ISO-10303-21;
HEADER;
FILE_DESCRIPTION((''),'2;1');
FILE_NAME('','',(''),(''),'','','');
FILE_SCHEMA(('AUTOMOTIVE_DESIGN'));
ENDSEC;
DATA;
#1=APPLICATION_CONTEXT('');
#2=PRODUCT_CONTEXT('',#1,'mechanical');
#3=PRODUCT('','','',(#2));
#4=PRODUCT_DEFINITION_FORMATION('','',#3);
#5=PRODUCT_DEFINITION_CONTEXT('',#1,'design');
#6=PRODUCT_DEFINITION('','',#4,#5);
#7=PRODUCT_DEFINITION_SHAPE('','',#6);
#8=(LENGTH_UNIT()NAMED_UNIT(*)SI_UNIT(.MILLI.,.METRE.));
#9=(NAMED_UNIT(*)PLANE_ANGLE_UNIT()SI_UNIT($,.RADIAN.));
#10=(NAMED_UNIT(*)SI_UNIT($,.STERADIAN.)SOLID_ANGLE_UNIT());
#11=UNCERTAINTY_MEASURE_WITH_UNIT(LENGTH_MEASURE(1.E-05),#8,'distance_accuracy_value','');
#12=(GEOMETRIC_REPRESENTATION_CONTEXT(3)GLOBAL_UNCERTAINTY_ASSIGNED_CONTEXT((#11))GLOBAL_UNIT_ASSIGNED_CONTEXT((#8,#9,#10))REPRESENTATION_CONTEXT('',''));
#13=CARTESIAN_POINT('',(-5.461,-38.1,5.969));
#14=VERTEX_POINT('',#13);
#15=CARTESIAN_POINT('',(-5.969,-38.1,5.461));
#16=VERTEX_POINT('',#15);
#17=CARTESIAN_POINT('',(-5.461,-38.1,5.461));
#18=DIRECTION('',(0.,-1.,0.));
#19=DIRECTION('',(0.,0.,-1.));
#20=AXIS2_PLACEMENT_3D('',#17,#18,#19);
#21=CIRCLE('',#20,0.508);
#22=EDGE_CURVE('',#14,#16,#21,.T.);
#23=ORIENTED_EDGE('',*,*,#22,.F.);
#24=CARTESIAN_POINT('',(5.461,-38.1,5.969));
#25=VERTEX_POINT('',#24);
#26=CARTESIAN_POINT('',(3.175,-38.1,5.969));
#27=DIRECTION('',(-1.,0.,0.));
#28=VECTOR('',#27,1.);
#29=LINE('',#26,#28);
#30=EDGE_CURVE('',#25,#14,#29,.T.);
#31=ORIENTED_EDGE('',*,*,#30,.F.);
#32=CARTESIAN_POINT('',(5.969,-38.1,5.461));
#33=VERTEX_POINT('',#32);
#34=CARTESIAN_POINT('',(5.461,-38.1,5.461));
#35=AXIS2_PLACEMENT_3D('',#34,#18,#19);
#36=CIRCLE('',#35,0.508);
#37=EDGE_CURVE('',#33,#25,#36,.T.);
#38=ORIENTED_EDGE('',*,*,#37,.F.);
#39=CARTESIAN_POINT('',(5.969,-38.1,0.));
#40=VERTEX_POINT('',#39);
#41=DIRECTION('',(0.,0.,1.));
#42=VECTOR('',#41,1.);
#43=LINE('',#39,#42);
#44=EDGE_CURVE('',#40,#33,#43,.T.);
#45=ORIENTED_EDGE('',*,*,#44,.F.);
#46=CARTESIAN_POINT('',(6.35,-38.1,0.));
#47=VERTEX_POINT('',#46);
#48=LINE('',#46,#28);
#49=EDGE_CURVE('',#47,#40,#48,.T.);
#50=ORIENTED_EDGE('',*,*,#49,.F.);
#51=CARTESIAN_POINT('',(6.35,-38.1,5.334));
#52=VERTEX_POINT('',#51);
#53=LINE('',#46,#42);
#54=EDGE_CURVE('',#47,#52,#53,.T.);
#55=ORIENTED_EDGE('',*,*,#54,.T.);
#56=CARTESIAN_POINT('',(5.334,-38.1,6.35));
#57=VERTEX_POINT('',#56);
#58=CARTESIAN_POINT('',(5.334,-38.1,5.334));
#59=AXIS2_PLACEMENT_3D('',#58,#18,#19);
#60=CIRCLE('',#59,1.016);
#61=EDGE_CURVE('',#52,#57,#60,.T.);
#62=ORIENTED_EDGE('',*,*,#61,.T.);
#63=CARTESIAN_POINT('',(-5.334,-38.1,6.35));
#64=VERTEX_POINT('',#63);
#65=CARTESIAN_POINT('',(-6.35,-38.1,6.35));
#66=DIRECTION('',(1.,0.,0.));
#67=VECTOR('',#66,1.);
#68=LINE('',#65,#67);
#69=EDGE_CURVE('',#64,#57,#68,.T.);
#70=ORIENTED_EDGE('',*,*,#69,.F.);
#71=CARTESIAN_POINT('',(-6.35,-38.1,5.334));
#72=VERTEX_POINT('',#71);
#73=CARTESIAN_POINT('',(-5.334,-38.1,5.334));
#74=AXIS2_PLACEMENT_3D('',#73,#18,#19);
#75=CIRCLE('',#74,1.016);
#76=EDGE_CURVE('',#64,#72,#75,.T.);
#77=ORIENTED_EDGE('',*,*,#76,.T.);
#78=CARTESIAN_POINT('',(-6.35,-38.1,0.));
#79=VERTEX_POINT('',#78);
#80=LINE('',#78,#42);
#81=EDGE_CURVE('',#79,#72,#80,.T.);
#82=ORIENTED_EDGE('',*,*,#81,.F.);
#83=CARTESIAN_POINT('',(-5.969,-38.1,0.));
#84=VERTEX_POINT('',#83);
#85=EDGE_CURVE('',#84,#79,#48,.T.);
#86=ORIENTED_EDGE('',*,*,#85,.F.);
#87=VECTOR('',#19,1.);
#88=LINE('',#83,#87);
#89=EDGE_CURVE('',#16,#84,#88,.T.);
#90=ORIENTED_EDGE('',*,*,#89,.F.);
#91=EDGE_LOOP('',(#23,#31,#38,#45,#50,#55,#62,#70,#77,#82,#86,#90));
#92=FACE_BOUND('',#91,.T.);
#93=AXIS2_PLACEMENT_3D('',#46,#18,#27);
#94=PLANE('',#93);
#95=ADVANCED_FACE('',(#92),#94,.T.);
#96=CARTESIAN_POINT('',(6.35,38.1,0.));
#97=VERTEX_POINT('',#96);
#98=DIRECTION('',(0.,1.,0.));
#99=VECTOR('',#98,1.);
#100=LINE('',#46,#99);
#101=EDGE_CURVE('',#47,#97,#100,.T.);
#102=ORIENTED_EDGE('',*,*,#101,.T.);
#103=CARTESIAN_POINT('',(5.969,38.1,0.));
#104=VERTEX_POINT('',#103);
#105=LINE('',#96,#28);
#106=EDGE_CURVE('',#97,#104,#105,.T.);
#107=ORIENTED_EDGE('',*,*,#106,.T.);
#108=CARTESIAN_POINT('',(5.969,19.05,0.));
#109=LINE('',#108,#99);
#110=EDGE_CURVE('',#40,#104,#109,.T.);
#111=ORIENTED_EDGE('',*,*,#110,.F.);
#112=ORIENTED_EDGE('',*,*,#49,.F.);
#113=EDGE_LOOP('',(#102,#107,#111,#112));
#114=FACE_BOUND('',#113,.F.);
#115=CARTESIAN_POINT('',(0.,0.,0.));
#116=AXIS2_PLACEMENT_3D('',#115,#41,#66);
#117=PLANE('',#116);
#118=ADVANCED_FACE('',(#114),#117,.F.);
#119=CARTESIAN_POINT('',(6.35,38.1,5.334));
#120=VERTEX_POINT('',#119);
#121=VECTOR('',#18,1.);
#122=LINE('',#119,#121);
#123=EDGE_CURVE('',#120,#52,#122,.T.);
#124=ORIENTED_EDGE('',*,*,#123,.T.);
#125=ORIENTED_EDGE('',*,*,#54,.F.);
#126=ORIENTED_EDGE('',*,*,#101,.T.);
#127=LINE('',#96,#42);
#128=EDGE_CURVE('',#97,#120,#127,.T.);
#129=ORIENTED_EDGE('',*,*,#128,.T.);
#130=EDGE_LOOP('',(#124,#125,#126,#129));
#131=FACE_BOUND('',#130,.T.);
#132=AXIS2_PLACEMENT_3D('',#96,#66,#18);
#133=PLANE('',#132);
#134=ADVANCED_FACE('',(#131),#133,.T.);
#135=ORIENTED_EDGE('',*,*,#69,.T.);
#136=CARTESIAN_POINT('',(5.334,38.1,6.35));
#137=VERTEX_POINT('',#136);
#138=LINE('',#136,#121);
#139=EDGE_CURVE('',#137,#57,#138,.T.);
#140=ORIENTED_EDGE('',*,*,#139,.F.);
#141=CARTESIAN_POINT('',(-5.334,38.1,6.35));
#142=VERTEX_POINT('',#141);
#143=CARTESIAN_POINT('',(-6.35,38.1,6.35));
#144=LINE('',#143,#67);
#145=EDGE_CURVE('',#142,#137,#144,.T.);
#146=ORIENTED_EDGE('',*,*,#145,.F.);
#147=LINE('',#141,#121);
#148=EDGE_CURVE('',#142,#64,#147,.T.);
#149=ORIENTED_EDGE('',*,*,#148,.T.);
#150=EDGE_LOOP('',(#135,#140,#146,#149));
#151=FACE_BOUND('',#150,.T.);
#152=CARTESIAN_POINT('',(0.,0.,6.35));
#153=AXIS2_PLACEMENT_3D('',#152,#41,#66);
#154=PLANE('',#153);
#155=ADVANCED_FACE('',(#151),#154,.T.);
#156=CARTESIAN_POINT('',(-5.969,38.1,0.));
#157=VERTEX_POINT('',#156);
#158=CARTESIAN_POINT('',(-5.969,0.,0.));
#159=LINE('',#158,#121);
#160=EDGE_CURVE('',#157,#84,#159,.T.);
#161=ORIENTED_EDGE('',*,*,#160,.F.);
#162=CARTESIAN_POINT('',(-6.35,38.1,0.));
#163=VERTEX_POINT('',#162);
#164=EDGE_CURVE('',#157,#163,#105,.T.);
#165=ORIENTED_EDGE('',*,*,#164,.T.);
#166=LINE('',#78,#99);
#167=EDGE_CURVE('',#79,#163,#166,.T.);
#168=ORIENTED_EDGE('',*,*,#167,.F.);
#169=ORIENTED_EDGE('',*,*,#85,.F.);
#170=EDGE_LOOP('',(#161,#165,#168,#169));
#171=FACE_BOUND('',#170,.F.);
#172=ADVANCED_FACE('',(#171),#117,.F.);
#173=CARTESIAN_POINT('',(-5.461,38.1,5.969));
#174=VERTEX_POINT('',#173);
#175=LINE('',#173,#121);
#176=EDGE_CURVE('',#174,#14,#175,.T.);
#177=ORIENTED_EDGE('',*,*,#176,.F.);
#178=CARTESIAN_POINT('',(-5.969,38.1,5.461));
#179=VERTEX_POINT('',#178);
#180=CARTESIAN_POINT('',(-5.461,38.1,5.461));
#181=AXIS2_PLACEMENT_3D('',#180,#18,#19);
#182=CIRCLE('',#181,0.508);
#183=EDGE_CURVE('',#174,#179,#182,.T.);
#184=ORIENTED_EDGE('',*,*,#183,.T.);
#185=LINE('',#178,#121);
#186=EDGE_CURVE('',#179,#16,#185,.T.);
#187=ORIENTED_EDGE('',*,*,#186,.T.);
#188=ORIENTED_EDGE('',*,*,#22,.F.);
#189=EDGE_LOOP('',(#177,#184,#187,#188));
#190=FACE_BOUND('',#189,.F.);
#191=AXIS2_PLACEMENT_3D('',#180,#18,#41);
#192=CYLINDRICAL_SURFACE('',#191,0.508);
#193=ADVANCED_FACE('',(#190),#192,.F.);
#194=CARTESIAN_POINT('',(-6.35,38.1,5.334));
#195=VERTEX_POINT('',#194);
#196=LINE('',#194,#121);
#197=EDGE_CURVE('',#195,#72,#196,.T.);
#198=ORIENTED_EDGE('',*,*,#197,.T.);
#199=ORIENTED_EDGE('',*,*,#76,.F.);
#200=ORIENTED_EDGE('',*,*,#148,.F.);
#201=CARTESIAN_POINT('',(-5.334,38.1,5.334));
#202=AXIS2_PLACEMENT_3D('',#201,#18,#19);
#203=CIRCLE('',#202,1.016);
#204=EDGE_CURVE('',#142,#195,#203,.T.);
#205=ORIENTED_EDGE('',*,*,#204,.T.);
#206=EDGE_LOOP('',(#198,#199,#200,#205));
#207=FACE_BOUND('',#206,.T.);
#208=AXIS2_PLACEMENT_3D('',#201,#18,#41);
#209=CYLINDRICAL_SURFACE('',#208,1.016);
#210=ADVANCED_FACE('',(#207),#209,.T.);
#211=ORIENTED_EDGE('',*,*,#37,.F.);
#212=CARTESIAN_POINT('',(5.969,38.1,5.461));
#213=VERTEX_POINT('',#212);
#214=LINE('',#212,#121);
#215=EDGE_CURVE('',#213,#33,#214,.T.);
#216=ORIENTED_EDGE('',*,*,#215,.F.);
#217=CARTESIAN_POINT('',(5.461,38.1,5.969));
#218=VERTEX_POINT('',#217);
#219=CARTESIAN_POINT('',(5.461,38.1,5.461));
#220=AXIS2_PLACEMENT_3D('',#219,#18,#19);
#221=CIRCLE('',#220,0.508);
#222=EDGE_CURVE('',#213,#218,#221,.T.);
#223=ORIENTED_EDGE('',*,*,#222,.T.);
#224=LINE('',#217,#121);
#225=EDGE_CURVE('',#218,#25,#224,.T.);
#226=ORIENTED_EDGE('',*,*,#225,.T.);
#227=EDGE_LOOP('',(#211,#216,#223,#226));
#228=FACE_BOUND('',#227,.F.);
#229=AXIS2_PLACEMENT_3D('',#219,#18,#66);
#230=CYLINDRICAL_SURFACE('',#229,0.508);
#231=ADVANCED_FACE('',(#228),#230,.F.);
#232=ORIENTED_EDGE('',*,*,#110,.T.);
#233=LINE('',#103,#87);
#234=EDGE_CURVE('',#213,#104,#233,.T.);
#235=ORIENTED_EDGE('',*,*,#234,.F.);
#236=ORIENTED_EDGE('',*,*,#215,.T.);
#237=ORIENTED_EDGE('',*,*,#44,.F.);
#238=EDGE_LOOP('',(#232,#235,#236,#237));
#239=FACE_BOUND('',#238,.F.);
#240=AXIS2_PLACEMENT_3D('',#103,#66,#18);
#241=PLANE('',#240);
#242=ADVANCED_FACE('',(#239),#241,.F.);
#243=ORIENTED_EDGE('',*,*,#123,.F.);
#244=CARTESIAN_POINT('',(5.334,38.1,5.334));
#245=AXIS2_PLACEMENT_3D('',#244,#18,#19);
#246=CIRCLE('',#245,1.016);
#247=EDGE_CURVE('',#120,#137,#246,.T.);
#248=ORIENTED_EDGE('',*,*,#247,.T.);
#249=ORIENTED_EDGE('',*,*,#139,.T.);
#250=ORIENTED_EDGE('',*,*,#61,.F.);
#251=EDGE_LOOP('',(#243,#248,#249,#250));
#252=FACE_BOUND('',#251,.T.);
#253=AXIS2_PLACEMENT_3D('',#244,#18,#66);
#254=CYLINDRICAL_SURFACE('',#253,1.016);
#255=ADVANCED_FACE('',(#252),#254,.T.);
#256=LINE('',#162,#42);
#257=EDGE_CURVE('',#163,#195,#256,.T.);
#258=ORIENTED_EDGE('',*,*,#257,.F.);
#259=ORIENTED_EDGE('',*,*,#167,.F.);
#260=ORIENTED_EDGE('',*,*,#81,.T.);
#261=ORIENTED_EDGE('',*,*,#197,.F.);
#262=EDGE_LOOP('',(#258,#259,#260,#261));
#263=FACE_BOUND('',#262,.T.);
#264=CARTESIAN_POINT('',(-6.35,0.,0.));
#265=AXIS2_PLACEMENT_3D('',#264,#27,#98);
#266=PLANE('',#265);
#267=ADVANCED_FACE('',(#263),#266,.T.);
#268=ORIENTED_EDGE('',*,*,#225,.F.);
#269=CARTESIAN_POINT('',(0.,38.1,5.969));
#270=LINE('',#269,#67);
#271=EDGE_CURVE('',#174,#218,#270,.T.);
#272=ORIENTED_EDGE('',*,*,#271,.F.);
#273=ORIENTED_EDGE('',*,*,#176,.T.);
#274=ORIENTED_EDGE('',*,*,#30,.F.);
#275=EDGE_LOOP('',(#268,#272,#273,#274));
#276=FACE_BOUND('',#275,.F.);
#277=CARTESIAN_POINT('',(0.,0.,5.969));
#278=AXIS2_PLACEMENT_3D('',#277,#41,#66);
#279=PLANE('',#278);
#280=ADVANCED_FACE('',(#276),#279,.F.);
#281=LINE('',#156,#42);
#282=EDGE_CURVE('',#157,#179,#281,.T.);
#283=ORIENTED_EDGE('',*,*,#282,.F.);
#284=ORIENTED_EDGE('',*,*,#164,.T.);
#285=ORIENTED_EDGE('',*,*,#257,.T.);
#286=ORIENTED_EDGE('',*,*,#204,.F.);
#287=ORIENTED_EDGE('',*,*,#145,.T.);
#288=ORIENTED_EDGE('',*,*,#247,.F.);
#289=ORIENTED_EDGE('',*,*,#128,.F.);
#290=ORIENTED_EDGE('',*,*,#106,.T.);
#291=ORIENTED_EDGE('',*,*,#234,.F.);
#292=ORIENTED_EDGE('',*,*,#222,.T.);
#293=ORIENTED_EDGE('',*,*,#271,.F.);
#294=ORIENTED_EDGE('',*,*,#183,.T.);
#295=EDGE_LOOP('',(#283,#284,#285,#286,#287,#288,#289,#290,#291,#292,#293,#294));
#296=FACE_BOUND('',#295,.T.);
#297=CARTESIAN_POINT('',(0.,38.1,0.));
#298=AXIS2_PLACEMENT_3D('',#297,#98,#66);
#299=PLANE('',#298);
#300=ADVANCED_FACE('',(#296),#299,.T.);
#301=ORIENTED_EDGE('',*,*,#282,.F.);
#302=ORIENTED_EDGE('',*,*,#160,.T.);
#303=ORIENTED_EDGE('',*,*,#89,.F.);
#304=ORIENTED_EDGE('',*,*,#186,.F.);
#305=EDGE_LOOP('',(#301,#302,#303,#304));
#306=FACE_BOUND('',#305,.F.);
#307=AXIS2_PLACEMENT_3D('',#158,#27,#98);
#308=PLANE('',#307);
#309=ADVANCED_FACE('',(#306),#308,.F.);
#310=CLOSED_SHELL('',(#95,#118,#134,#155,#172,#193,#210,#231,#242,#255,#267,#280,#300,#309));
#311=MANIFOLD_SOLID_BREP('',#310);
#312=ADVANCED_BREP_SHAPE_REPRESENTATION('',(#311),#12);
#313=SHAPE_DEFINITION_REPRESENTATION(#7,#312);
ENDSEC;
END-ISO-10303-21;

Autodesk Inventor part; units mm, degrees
ref_plane "YZ Plane" through (0, 0, 0) normal (1, 0, 0) x (0, 1, 0)
ref_plane "XZ Plane" through (0, 0, 0) normal (0, 1, 0) x (-1, 0, 0)
ref_plane "XY Plane" through (0, 0, 0) normal (0, 0, 1) x (1, 0, 0)
sketch "Sketch1" plane through (0, 0, 0) normal (0, 0, 1) x (1, 0, 0)
  line L0 (0, 53.34) -> (0, -53.34) projected
  line L1 (-8.89, 0) -> (8.89, 0) projected
  line L2 (-6.35, 38.1) -> (6.35, 38.1)
  line L3 (6.35, 38.1) -> (6.35, -38.1)
  line L4 (6.35, -38.1) -> (-6.35, -38.1)
  line L5 (-6.35, -38.1) -> (-6.35, 38.1)
  dimension "d0" = 12.7
  dimension "d1" = 76.2
extrude "Extrusion1" add sketch "Sketch1" along normal blind 6.35
shell "Shell1" thickness 0.381 removed faces 3 at (2.1167, -38.1, 2.1167) at (2.1167, -12.7, 0) at (-2.1167, 38.1, 2.1167)
fillet "Fillet1" radius 0.508 2 edges at (-5.969, 0, 5.969) (5.969, 0, 5.969)
fillet "Fillet1" radius 1.016 2 edges at (-6.35, 0, 6.35) (6.35, 0, 6.35)
properties part number "Staples" material "Steel, Mild"
